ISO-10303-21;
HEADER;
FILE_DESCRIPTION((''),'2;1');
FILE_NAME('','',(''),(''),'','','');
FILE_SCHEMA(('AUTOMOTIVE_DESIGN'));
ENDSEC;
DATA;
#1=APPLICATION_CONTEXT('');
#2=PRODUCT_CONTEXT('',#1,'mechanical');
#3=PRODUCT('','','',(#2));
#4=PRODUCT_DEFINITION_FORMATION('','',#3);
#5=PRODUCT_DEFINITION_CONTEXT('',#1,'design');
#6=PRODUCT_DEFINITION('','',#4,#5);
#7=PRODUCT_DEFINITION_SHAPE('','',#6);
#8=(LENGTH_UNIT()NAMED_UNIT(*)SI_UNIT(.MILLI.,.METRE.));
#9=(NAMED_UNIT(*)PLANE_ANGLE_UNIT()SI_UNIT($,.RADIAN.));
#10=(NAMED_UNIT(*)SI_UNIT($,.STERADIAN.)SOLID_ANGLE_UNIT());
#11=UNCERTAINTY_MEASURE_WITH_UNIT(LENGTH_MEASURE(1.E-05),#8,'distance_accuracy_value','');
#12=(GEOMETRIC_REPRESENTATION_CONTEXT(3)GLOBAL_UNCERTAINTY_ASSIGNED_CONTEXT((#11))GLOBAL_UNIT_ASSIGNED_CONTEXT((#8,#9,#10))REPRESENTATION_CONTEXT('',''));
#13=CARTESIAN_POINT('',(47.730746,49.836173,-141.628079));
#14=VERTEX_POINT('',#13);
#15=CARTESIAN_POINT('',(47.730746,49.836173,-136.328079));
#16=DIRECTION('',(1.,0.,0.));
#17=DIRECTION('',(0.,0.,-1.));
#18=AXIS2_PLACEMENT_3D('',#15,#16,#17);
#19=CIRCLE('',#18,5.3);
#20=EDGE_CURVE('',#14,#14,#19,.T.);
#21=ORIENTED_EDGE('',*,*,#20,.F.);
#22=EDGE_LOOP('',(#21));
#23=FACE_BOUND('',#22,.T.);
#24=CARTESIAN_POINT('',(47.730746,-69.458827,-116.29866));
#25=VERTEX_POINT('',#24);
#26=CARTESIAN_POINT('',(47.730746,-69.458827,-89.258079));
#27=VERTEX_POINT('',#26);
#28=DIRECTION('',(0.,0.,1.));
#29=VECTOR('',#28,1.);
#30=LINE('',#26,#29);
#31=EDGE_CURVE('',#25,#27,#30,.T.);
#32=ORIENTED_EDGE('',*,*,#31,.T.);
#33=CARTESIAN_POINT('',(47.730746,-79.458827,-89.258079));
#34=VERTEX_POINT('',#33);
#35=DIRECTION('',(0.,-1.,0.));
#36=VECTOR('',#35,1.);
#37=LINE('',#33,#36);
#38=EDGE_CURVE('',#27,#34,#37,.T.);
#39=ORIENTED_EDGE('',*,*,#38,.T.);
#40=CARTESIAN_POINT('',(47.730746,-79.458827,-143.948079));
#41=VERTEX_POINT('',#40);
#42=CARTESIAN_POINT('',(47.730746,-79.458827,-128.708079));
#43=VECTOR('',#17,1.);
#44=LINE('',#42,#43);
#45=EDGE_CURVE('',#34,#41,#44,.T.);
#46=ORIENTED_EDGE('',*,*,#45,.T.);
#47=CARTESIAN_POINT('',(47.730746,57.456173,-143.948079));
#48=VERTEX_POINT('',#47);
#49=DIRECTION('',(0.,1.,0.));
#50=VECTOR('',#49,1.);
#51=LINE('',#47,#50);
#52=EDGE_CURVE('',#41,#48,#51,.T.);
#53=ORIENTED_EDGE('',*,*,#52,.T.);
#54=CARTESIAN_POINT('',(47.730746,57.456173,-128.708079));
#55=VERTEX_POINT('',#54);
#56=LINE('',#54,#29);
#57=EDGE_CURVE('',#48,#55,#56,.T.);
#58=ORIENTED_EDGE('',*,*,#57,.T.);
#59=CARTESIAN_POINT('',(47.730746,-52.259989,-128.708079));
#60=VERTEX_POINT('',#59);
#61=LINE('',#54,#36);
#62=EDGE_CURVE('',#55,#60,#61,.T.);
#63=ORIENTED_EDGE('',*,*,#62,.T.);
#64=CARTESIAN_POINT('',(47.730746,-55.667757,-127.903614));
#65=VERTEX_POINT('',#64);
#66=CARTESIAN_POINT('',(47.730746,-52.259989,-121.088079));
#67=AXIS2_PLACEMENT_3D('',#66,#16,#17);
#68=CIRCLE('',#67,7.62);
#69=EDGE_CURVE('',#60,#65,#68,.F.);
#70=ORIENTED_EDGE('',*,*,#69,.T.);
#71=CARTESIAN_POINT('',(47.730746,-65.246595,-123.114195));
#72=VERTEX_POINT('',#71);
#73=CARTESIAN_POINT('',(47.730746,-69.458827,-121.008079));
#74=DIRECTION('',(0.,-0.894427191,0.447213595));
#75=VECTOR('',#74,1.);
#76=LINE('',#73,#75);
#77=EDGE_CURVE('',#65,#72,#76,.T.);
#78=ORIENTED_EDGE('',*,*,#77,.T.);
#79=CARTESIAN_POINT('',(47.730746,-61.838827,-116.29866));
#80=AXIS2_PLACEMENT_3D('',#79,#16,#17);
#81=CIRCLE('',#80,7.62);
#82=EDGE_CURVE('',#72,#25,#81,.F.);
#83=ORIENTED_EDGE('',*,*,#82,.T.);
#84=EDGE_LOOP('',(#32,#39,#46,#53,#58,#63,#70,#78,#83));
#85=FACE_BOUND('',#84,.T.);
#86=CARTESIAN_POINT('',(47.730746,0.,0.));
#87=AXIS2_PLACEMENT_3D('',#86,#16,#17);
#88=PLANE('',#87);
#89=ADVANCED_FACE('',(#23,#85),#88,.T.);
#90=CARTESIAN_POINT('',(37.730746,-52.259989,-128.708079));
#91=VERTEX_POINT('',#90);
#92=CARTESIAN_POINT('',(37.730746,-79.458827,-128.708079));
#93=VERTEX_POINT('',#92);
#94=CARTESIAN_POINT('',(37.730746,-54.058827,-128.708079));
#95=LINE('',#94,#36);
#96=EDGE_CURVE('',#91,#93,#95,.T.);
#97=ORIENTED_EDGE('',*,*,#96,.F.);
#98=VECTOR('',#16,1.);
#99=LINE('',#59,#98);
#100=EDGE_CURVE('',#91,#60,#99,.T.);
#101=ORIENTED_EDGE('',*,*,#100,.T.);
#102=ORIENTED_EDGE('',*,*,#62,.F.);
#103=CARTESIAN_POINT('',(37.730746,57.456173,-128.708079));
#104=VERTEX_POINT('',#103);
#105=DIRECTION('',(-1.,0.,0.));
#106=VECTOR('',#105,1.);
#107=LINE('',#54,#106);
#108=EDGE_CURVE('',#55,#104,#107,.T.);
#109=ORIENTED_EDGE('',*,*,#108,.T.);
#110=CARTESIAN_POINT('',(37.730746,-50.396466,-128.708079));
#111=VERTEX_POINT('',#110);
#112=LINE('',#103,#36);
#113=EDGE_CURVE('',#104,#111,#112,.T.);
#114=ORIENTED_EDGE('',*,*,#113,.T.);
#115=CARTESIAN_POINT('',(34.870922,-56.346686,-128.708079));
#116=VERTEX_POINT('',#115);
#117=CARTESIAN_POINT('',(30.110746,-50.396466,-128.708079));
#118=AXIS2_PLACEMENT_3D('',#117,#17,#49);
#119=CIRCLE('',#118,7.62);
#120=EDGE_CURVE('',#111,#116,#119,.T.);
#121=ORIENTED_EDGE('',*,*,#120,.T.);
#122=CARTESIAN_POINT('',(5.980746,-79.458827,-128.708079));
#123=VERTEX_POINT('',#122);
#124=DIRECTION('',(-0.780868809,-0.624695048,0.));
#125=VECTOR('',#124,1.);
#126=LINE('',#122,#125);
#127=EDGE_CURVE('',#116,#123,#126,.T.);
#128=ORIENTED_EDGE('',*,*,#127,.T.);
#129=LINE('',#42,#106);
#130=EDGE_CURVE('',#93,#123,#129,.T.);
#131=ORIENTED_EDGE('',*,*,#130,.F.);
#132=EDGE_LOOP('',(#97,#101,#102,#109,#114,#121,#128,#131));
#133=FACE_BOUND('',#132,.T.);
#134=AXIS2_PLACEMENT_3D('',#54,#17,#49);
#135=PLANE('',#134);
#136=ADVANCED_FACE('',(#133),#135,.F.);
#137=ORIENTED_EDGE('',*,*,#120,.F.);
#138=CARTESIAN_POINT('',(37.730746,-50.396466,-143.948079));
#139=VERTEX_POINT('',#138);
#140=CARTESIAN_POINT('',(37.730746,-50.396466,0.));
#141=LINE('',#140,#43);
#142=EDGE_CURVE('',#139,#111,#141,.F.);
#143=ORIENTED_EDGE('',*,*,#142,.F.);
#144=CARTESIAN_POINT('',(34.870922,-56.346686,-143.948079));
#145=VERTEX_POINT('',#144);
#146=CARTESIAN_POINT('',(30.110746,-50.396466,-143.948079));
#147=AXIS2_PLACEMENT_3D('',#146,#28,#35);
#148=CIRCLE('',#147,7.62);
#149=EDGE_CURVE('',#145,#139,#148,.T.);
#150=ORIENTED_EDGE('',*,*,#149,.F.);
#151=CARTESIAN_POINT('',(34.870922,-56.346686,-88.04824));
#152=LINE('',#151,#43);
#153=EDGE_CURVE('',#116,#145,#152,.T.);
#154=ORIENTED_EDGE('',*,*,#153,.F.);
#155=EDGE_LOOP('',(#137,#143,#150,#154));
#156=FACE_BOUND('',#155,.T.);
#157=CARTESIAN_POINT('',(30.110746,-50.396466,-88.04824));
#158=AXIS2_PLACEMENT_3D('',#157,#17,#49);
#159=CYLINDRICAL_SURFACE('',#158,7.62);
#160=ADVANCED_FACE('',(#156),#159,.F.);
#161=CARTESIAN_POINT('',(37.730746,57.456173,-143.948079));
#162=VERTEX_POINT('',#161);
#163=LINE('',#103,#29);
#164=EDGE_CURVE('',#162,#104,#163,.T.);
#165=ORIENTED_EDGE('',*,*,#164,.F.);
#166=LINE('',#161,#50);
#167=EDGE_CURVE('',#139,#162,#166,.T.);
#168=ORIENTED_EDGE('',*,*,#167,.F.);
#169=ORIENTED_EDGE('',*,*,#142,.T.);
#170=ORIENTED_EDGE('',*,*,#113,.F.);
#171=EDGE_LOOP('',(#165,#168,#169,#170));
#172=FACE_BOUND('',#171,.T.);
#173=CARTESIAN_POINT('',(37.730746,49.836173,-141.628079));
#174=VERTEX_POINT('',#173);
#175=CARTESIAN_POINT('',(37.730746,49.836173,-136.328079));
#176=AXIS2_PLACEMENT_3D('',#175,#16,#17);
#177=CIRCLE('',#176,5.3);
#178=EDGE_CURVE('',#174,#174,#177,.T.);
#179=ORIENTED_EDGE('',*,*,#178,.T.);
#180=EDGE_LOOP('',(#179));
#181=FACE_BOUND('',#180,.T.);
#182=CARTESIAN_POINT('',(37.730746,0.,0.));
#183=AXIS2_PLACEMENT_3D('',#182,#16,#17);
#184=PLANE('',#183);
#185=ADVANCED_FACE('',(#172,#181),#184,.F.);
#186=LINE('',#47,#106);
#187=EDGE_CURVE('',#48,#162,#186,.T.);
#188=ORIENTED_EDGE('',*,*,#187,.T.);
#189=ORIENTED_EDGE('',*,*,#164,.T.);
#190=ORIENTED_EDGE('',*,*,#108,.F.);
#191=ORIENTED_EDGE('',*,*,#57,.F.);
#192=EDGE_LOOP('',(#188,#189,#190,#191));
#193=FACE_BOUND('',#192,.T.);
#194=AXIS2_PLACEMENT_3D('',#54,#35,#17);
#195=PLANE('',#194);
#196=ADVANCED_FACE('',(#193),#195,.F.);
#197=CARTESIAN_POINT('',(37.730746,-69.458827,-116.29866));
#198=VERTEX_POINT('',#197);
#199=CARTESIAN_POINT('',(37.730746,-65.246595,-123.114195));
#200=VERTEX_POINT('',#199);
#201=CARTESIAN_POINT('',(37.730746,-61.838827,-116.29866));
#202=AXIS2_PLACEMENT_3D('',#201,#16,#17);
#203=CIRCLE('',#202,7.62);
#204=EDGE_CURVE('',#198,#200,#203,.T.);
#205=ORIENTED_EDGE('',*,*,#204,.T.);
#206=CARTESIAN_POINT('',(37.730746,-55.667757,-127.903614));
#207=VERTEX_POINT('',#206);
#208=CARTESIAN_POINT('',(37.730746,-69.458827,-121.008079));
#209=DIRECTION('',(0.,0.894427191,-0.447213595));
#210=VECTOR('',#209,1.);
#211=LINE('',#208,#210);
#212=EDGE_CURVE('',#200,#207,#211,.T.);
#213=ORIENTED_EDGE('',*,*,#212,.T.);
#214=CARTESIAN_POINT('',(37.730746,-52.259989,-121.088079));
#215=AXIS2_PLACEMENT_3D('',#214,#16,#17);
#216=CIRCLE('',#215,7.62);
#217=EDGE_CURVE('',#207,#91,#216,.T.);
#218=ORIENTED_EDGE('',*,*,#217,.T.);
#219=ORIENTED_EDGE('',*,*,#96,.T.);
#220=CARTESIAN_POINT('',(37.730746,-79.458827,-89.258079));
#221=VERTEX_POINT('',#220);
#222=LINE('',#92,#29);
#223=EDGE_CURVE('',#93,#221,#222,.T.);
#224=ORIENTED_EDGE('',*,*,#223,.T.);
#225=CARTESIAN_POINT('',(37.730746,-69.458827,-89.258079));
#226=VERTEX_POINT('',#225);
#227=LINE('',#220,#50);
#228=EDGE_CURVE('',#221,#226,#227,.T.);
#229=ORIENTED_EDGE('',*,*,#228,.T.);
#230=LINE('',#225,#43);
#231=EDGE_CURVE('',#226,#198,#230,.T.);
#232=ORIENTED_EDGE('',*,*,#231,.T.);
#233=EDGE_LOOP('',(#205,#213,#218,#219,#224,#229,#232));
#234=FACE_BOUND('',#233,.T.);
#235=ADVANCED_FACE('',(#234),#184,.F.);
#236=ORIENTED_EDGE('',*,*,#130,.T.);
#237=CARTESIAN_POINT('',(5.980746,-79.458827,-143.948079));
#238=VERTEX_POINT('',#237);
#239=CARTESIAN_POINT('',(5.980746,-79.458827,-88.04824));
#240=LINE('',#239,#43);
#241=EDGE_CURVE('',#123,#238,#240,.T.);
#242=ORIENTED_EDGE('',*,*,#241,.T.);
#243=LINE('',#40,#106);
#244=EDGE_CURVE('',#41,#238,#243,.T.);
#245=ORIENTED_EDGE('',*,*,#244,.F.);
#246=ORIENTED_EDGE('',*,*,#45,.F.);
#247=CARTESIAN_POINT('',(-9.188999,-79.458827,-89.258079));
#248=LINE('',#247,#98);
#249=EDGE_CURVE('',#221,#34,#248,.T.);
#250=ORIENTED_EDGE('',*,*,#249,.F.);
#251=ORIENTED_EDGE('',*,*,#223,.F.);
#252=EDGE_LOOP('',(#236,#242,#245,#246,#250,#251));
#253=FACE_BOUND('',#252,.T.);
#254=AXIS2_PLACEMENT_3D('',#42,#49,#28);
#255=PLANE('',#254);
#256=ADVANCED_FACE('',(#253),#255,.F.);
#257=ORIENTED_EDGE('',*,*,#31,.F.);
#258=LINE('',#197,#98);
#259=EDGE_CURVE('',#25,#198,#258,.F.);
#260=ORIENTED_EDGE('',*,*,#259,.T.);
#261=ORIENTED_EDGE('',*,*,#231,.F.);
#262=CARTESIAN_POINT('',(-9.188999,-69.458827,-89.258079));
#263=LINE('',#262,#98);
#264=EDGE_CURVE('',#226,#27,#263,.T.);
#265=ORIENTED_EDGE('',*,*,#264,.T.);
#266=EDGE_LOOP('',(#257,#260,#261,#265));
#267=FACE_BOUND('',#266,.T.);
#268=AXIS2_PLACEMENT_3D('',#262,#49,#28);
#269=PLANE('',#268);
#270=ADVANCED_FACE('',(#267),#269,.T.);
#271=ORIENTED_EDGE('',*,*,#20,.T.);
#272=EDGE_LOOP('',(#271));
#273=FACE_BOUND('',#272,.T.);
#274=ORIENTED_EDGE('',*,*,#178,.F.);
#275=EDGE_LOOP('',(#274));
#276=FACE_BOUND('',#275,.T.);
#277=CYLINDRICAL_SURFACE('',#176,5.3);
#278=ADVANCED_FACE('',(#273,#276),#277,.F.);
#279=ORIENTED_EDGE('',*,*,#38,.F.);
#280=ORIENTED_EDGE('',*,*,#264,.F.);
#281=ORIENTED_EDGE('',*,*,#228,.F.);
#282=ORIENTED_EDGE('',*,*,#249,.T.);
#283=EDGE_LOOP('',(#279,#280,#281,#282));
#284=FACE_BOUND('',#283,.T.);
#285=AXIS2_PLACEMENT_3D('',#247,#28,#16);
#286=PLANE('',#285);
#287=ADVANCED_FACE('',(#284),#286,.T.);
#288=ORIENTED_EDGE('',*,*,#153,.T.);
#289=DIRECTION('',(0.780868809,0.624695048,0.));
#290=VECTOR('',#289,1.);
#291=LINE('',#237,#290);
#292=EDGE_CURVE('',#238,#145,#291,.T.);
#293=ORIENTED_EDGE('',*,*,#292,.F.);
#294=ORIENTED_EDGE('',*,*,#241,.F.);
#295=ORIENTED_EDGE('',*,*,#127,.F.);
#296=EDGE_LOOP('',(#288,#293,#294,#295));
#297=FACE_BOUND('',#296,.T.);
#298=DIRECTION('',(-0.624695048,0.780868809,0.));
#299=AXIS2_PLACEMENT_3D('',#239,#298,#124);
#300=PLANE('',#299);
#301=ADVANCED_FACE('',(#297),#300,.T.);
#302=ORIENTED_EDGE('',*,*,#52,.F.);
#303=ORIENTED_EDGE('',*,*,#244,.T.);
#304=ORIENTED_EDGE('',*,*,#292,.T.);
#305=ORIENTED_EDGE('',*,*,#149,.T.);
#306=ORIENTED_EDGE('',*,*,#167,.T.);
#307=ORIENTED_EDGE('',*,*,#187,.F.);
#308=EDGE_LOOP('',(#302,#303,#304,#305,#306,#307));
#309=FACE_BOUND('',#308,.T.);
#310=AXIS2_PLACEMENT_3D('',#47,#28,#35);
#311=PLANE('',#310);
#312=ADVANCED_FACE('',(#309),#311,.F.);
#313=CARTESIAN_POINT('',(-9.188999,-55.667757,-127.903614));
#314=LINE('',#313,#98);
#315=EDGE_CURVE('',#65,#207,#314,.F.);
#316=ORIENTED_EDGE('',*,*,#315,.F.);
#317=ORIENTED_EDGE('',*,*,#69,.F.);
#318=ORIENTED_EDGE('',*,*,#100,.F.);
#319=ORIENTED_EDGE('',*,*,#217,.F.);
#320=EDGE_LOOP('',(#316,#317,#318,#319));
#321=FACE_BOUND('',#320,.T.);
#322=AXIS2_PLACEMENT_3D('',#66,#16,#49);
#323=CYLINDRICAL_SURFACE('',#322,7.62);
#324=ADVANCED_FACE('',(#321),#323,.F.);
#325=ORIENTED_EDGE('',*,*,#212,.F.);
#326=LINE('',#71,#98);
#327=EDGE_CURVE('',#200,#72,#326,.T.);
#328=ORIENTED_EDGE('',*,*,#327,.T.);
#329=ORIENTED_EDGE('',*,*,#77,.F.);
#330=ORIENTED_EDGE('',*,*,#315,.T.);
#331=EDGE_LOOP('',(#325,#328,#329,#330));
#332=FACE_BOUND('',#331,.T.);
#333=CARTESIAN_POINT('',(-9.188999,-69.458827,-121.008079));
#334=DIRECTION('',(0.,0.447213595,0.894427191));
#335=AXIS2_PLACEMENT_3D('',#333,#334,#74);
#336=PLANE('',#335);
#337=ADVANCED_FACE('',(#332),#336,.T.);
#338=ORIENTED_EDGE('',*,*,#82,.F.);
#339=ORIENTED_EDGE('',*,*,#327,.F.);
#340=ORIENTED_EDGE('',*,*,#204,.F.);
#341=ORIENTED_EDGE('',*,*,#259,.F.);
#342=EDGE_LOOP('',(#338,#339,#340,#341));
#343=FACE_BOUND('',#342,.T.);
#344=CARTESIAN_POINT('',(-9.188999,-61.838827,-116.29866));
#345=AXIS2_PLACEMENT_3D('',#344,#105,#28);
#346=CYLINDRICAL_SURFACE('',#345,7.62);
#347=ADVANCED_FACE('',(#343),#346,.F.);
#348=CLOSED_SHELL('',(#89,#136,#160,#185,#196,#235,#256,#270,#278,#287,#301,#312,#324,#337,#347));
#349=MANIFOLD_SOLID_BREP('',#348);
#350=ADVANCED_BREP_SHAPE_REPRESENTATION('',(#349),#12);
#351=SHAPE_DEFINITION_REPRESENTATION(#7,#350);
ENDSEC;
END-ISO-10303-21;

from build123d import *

# Parameters (mm, degrees)
SKETCH1_W           = 15.24
SKETCH1_H           = 136.915
BOSS_EXTRUDE1_DEPTH = 10
SKETCH2_R           = 5.3
CUT_EXTRUDE1_DEPTH  = 165.72630229
BOSS_EXTRUDE2_DEPTH = 15.24
BOSS_EXTRUDE3_DEPTH = 10
FILLET7_R           = 7.62
FILLET8_R           = 7.62


with BuildPart() as part:
    # Sketch1 → Boss-Extrude1 (new body)
    with BuildSketch(Plane(origin=(37.730745885, 0, 0), x_dir=(0, 0, -1), z_dir=(1, 0, 0))):
        with Locations((136.328078847, -11.001327465)):
            Rectangle(SKETCH1_W, SKETCH1_H)
    extrude(amount=BOSS_EXTRUDE1_DEPTH)

    # Sketch2 → Cut-Extrude1 (cut, through all)
    with BuildSketch(Plane(origin=(47.730745885, 0, 0), x_dir=(0, 0, -1), z_dir=(1, 0, 0))):
        with Locations((136.328078847, 49.836172535)):
            Circle(SKETCH2_R)
    extrude(amount=-CUT_EXTRUDE1_DEPTH, mode=Mode.SUBTRACT)

    # Sketch4 → Boss-Extrude2 (add)
    with BuildSketch(Plane(origin=(0, 0, -143.948078847), x_dir=(-1, 0, 0), z_dir=(0, 0, -1))):
        Polygon((-37.730745885, -79.458827465), (-5.980745885, -79.458827465), (-37.730745885, -54.058827465), align=None)
    extrude(amount=-BOSS_EXTRUDE2_DEPTH)

    # Sketch6 → Boss-Extrude3 (add)
    with BuildSketch(Plane(origin=(47.730745885, 0, 0), x_dir=(0, 0, -1), z_dir=(1, 0, 0))):
        Polygon((128.708078847, -79.458827465), (116.008078847, -79.458827465), (89.258078847, -79.458827465), (89.258078847, -69.458827465), (121.008078847, -69.458827465), (128.708078847, -54.058827465), align=None)
    extrude(amount=-BOSS_EXTRUDE3_DEPTH)

    # Fillet7
    # the kernel refuses this fillet: 7.62 mm, written as the material it adds along each edge
    with BuildSketch(Plane(origin=(37.730745885, -54.058827465, -143.948078847), x_dir=(-0.7808688094430346, -0.6246950475544188, 2.599749935093665e-15), z_dir=(0, 0, 1))) as fillet7_piece_1:
        with BuildLine():
            CenterArc((FILLET7_R * 0.480624847487, -FILLET7_R), FILLET7_R, 90, 51.340191746)
            Line((-FILLET7_R * 0.300243961956, -FILLET7_R * 0.375304952446), (0, 0))
            Line((0, 0), (FILLET7_R * 0.480624847487, 0))
        make_face()
    extrude(amount=15.24)
    with BuildSketch(Plane(origin=(47.730745885, -69.458827465, -121.008078847), x_dir=(-1.4253394908736166e-15, 0.8944271909999135, -0.4472135954999628), z_dir=(-1, 0, 0))) as fillet7_piece_2:
        with BuildLine():
            CenterArc((FILLET7_R * 0.61803398875, -FILLET7_R), FILLET7_R, 90, 63.434948823)
            Line((-FILLET7_R * 0.27639320225, -FILLET7_R * 0.5527864045), (0, 0))
            Line((0, 0), (FILLET7_R * 0.61803398875, 0))
        make_face()
    extrude(amount=10)

    # Fillet8
    fillet8_edges = [part.edges().sort_by_distance(p)[0] for p in [
        (42.730745885, -54.058827465, -128.708078847),
    ]]
    fillet(fillet8_edges, radius=FILLET8_R)


solid = part.part
